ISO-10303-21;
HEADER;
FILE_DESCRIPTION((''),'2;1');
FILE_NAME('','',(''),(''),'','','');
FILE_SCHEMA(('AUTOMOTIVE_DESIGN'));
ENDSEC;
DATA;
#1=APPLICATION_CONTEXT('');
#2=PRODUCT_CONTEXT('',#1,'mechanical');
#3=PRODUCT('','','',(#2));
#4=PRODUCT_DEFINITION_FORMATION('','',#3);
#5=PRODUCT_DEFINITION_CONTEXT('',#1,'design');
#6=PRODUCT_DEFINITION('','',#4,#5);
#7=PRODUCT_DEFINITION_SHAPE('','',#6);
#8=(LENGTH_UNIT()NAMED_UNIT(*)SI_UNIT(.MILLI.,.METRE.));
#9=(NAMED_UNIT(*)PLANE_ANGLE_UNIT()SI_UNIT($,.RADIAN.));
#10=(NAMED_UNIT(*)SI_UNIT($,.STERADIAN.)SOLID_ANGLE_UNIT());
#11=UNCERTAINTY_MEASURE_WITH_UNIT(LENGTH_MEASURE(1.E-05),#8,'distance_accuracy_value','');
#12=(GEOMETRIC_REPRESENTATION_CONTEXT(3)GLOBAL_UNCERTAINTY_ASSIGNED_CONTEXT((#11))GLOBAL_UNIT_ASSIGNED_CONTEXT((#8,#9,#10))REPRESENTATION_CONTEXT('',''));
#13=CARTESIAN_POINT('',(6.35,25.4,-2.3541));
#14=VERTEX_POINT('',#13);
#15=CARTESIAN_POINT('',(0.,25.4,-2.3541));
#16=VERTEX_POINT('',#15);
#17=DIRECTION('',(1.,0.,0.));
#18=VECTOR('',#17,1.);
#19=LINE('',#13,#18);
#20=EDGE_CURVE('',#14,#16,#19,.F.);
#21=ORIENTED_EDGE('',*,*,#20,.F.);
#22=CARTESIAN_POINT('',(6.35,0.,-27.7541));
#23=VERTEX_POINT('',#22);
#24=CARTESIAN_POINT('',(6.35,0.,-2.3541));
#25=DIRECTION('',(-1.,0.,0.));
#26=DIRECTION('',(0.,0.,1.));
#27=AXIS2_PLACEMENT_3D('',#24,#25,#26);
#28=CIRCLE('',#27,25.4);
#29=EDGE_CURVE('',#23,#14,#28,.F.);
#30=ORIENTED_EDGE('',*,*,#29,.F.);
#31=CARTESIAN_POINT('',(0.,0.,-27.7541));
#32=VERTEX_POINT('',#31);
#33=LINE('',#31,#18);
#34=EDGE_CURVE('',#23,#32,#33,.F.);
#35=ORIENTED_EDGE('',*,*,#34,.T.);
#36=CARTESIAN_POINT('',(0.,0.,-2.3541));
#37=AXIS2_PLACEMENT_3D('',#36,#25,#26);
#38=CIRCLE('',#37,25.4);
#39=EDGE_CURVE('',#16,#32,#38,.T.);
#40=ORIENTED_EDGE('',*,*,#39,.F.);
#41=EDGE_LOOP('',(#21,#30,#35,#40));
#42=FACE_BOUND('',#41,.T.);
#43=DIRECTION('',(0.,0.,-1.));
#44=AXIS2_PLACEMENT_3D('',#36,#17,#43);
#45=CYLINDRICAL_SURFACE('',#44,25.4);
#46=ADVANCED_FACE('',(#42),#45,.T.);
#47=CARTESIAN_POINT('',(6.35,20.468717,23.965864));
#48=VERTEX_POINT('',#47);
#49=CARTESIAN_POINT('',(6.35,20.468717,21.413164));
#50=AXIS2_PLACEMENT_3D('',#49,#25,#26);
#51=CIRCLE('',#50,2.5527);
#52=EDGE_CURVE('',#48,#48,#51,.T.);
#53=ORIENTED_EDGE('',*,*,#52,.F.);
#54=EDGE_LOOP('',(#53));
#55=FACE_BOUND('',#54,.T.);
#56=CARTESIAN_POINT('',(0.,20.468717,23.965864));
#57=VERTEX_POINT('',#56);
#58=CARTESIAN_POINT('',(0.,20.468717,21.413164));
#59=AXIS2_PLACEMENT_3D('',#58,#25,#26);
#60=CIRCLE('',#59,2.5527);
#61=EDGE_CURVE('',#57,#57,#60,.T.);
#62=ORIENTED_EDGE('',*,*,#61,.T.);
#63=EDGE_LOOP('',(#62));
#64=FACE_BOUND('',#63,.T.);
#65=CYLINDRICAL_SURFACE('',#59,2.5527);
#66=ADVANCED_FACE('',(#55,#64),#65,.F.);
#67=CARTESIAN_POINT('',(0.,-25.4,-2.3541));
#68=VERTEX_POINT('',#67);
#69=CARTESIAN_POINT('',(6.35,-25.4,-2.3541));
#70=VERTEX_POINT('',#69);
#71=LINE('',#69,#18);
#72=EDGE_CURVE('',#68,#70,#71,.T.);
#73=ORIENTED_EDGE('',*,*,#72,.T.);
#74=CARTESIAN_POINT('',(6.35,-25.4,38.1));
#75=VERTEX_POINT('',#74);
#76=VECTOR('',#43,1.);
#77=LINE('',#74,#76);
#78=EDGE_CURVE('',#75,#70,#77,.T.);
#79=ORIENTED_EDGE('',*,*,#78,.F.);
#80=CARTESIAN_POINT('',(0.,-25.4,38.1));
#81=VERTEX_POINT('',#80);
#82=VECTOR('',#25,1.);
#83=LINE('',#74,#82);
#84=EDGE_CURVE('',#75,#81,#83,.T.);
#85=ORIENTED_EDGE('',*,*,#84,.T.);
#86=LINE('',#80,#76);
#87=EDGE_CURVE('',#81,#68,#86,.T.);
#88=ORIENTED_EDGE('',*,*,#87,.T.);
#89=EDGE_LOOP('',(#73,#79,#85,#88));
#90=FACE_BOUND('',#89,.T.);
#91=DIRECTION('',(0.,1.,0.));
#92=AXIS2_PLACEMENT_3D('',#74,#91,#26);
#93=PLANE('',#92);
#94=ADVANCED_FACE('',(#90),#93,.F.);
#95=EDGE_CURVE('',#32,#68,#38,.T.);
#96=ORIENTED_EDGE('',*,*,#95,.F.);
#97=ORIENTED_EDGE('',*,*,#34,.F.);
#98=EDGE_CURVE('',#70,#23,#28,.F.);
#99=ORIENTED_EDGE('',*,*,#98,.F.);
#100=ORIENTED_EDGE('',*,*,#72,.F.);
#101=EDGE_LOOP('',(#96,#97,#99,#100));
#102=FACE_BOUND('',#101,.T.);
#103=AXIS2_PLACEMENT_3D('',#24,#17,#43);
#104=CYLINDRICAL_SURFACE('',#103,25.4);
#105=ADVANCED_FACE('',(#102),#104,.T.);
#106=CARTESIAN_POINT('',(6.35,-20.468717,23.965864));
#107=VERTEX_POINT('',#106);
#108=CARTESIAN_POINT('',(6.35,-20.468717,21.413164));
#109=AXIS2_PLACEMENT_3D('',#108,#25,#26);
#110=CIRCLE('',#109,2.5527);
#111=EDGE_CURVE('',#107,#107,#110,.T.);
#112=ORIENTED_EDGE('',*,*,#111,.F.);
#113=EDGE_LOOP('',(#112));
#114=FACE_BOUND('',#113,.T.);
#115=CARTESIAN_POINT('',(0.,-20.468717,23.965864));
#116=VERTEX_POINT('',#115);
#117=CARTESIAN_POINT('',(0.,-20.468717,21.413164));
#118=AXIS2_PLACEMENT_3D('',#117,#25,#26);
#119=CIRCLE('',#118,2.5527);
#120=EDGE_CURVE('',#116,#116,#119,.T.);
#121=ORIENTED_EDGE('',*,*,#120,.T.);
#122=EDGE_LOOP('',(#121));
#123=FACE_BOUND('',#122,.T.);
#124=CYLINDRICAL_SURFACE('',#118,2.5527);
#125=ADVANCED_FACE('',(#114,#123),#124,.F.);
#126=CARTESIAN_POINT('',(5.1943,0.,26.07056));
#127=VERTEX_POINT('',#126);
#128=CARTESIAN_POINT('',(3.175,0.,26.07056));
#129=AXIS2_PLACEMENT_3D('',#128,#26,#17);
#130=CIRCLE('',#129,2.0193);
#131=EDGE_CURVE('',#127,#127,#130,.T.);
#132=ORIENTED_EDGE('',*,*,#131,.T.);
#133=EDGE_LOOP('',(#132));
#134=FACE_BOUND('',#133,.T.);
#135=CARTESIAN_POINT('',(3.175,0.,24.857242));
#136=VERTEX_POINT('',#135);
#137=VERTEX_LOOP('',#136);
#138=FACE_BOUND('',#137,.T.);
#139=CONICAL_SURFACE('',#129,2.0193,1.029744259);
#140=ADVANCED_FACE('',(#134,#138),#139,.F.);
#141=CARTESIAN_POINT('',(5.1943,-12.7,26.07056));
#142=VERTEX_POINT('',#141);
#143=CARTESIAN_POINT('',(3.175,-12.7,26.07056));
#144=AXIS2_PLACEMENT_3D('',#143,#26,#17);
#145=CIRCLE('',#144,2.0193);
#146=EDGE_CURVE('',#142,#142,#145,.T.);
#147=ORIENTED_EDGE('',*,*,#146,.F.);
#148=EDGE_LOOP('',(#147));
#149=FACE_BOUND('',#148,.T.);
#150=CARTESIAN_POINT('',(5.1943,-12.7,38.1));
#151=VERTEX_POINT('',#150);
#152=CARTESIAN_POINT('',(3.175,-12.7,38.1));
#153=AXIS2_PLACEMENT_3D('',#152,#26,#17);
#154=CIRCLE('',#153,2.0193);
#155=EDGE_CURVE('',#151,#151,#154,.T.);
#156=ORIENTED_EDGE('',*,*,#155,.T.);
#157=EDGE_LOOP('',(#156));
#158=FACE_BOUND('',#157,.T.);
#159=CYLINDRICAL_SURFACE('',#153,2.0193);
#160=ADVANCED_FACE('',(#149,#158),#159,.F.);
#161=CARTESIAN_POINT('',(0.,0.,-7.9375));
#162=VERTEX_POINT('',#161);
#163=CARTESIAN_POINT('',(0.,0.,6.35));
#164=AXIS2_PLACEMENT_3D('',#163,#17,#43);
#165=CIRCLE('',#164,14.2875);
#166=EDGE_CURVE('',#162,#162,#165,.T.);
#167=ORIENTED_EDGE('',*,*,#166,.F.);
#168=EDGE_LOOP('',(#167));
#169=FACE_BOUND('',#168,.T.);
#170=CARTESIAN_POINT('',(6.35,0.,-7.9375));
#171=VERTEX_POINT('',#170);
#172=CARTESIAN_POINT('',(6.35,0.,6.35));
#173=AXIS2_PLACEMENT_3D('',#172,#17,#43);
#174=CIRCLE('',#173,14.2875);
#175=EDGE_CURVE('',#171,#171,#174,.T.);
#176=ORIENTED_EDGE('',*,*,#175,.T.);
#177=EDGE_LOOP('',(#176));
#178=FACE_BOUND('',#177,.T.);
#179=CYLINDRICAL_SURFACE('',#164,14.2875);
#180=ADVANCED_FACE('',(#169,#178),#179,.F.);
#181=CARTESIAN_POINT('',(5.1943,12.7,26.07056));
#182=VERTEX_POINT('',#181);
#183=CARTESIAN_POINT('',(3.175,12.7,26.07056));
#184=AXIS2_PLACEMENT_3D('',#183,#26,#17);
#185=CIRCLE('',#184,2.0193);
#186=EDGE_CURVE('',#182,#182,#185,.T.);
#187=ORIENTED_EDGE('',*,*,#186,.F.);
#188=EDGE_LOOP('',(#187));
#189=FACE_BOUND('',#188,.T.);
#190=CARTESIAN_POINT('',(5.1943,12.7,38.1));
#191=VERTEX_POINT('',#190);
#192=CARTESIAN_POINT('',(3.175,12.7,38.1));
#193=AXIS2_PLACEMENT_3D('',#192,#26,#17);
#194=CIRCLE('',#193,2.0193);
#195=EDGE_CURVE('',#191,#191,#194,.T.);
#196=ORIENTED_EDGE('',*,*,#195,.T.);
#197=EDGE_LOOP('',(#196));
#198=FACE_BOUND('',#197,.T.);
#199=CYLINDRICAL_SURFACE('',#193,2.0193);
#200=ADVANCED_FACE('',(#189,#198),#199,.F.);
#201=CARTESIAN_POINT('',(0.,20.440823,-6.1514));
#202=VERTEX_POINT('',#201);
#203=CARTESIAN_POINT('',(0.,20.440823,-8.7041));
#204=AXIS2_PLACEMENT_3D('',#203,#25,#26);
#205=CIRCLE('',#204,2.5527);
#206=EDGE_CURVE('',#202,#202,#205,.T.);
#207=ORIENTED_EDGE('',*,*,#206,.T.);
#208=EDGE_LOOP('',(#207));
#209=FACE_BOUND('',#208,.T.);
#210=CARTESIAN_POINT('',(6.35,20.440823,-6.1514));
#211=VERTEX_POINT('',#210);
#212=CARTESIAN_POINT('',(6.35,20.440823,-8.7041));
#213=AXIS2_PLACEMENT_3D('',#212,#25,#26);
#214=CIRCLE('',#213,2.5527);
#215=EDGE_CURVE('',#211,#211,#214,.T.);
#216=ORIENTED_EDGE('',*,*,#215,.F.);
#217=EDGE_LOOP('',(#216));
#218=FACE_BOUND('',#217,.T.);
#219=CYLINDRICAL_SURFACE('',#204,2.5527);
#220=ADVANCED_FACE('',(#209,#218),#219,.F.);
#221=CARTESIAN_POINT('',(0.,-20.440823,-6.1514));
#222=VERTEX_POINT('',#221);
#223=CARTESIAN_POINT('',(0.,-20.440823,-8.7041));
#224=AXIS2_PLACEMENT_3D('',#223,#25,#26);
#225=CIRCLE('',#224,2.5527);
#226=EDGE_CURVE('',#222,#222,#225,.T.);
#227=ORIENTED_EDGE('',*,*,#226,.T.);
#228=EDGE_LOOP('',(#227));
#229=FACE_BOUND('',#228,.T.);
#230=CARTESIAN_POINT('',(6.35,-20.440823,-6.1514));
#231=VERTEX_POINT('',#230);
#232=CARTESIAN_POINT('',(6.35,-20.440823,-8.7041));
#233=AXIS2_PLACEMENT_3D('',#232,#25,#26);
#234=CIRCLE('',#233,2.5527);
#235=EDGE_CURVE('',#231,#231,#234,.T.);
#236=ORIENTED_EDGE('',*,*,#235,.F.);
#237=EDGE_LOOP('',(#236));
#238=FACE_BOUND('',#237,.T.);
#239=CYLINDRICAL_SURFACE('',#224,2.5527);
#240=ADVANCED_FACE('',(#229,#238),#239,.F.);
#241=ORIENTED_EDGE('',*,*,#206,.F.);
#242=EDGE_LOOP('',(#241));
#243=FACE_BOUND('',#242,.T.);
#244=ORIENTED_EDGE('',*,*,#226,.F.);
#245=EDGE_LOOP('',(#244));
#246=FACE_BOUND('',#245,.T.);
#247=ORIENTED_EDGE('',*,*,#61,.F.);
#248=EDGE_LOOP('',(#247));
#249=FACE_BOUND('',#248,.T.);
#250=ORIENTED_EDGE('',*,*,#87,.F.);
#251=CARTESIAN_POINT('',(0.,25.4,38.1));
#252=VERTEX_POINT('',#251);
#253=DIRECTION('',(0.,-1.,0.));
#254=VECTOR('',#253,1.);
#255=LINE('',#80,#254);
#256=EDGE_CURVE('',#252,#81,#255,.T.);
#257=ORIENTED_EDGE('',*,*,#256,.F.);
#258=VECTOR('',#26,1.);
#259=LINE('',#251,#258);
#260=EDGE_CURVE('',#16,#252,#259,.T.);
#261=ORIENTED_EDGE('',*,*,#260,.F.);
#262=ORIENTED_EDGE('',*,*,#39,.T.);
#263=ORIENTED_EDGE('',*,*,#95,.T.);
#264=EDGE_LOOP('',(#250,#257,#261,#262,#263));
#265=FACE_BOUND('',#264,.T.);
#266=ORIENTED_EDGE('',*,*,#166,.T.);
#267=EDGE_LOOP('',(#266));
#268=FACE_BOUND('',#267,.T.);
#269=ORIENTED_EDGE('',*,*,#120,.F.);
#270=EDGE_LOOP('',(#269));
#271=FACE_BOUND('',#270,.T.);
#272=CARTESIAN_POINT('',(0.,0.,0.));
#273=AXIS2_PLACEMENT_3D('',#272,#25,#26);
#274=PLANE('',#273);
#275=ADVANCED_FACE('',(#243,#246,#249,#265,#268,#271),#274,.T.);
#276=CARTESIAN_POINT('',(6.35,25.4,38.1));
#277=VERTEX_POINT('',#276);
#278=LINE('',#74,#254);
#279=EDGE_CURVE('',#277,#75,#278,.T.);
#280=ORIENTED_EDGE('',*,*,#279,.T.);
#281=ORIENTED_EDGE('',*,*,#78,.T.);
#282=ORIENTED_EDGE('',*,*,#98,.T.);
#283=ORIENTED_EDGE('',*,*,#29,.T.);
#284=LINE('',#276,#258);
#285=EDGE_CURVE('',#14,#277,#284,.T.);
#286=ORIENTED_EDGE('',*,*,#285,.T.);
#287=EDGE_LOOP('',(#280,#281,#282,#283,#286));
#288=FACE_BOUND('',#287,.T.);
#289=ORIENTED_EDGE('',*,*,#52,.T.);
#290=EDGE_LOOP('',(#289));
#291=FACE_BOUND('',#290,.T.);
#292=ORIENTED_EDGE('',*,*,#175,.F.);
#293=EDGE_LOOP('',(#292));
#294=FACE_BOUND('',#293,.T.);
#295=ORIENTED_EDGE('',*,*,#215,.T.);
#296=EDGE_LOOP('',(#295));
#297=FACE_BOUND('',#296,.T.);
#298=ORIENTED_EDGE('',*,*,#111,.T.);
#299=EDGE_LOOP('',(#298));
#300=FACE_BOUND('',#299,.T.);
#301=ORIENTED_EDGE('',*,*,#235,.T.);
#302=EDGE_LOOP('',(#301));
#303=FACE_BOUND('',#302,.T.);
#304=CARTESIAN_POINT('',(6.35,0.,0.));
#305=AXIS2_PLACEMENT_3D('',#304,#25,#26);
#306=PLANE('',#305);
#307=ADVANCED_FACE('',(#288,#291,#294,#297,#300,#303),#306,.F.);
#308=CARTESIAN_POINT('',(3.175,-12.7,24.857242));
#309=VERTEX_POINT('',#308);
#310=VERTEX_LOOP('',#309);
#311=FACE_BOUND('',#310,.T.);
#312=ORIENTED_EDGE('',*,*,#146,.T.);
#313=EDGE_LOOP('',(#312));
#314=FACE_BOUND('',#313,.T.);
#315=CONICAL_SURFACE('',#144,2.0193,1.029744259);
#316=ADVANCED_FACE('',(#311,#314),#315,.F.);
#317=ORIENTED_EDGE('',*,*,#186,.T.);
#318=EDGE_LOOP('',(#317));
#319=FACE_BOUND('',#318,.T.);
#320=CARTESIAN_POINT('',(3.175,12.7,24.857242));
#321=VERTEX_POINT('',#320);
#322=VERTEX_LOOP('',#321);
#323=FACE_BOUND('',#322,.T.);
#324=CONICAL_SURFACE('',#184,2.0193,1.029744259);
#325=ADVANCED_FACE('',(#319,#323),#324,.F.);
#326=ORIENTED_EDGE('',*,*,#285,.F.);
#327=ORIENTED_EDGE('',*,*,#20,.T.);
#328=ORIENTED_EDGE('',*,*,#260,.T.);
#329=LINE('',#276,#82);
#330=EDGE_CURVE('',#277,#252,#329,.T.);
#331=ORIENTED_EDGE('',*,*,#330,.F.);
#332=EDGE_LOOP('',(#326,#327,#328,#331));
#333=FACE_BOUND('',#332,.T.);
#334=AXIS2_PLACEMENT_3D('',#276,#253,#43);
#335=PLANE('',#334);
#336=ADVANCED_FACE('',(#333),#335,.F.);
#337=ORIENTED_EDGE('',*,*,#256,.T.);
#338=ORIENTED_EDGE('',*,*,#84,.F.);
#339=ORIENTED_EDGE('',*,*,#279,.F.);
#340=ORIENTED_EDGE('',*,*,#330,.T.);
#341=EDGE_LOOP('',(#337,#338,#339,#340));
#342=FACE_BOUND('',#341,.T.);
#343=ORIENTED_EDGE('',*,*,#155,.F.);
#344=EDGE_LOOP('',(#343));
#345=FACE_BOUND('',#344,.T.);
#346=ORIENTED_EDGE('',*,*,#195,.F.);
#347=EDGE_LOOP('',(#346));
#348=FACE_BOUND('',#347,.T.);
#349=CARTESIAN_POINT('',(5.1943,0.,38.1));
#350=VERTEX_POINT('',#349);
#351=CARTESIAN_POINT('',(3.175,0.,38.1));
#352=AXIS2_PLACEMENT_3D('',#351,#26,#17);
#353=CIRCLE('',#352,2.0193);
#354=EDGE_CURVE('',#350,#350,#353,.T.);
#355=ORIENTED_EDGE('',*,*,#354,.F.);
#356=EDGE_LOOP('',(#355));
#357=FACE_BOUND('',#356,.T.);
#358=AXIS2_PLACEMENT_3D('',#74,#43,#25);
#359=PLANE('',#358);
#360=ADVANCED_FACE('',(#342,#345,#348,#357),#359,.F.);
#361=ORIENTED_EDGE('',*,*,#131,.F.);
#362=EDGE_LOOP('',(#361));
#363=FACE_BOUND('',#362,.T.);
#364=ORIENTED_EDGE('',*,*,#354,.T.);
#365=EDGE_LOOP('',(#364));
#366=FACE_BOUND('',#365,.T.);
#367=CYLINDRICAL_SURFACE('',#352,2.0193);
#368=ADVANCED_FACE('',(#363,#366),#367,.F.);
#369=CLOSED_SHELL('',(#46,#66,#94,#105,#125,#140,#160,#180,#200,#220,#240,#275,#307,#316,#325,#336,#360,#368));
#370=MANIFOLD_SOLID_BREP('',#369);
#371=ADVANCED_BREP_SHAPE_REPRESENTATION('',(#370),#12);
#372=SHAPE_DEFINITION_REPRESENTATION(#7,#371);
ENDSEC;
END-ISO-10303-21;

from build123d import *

# Parameters (mm, degrees)
SKETCH2_W                  = 76.2
SKETCH2_H                  = 50.8
BOSS_EXTRUDE2_DEPTH        = 6.35
F_10_32_TAPPED_HOLE1_D     = 4.0386
F_10_32_TAPPED_HOLE1_DEPTH = 12.02944
F_10_32_TAPPED_HOLE1_TIP   = 1.213317848
SKETCH6_R                  = 14.2875
CUT_EXTRUDE1_DEPTH         = 47.228697797
F_10_CLEARANCE_HOLE1_D     = 5.1054
SKETCH13_W                 = 10.345899722
SKETCH13_H                 = 50.8
CUT_EXTRUDE2_DEPTH         = 47.228697797
FILLET3_R                  = 25.4


with BuildPart() as part:
    # Sketch2 → Boss-Extrude2 (new body)
    with BuildSketch(Plane(origin=(0, 0, 0), x_dir=(0, 0, -1), z_dir=(1, 0, 0))):
        Rectangle(SKETCH2_W, SKETCH2_H)
    extrude(amount=BOSS_EXTRUDE2_DEPTH)

    # #10-32 Tapped Hole1
    with Locations(Plane.XY.offset(38.1)):
        with Locations((3.175, -12.7), (3.175, 0), (3.175, 12.7)):
            Hole(F_10_32_TAPPED_HOLE1_D / 2, depth=F_10_32_TAPPED_HOLE1_DEPTH)
            with Locations((0, 0, -(F_10_32_TAPPED_HOLE1_DEPTH + F_10_32_TAPPED_HOLE1_TIP / 2))):  # 118° drill point
                Cone(0, F_10_32_TAPPED_HOLE1_D / 2, F_10_32_TAPPED_HOLE1_TIP, mode=Mode.SUBTRACT)

    # Sketch6 → Cut-Extrude1 (cut, through all)
    with BuildSketch(Plane(origin=(6.35, 0, 0), x_dir=(0, 0, -1), z_dir=(1, 0, 0))):
        with Locations((-6.35, 0)):
            Circle(SKETCH6_R)
    extrude(amount=-CUT_EXTRUDE1_DEPTH, mode=Mode.SUBTRACT)

    # #10 Clearance Hole1 (through all)
    with Locations(Plane.ZY):
        with Locations((-8.704100278, -20.440822776), (21.413163559, 20.468716687), (21.413163559, -20.468716687), (-8.704100278, 20.440822776)):
            Hole(F_10_CLEARANCE_HOLE1_D / 2)

    # Sketch13 → Cut-Extrude2 (cut, through all)
    with BuildSketch(Plane(origin=(6.35, 0, 0), x_dir=(0, 0, -1), z_dir=(1, 0, 0))):
        with Locations((32.927050139, 0)):
            Rectangle(SKETCH13_W, SKETCH13_H)
    extrude(amount=-CUT_EXTRUDE2_DEPTH, mode=Mode.SUBTRACT)

    # Fillet3
    fillet3_edges = [part.edges().sort_by_distance(p)[0] for p in [
        (3.175, 25.4, -27.754100278),
        (3.175, -25.4, -27.754100278),
    ]]
    fillet(fillet3_edges, radius=FILLET3_R - 0.0001)  # a hair under: the kernel refuses the full size


solid = part.part
